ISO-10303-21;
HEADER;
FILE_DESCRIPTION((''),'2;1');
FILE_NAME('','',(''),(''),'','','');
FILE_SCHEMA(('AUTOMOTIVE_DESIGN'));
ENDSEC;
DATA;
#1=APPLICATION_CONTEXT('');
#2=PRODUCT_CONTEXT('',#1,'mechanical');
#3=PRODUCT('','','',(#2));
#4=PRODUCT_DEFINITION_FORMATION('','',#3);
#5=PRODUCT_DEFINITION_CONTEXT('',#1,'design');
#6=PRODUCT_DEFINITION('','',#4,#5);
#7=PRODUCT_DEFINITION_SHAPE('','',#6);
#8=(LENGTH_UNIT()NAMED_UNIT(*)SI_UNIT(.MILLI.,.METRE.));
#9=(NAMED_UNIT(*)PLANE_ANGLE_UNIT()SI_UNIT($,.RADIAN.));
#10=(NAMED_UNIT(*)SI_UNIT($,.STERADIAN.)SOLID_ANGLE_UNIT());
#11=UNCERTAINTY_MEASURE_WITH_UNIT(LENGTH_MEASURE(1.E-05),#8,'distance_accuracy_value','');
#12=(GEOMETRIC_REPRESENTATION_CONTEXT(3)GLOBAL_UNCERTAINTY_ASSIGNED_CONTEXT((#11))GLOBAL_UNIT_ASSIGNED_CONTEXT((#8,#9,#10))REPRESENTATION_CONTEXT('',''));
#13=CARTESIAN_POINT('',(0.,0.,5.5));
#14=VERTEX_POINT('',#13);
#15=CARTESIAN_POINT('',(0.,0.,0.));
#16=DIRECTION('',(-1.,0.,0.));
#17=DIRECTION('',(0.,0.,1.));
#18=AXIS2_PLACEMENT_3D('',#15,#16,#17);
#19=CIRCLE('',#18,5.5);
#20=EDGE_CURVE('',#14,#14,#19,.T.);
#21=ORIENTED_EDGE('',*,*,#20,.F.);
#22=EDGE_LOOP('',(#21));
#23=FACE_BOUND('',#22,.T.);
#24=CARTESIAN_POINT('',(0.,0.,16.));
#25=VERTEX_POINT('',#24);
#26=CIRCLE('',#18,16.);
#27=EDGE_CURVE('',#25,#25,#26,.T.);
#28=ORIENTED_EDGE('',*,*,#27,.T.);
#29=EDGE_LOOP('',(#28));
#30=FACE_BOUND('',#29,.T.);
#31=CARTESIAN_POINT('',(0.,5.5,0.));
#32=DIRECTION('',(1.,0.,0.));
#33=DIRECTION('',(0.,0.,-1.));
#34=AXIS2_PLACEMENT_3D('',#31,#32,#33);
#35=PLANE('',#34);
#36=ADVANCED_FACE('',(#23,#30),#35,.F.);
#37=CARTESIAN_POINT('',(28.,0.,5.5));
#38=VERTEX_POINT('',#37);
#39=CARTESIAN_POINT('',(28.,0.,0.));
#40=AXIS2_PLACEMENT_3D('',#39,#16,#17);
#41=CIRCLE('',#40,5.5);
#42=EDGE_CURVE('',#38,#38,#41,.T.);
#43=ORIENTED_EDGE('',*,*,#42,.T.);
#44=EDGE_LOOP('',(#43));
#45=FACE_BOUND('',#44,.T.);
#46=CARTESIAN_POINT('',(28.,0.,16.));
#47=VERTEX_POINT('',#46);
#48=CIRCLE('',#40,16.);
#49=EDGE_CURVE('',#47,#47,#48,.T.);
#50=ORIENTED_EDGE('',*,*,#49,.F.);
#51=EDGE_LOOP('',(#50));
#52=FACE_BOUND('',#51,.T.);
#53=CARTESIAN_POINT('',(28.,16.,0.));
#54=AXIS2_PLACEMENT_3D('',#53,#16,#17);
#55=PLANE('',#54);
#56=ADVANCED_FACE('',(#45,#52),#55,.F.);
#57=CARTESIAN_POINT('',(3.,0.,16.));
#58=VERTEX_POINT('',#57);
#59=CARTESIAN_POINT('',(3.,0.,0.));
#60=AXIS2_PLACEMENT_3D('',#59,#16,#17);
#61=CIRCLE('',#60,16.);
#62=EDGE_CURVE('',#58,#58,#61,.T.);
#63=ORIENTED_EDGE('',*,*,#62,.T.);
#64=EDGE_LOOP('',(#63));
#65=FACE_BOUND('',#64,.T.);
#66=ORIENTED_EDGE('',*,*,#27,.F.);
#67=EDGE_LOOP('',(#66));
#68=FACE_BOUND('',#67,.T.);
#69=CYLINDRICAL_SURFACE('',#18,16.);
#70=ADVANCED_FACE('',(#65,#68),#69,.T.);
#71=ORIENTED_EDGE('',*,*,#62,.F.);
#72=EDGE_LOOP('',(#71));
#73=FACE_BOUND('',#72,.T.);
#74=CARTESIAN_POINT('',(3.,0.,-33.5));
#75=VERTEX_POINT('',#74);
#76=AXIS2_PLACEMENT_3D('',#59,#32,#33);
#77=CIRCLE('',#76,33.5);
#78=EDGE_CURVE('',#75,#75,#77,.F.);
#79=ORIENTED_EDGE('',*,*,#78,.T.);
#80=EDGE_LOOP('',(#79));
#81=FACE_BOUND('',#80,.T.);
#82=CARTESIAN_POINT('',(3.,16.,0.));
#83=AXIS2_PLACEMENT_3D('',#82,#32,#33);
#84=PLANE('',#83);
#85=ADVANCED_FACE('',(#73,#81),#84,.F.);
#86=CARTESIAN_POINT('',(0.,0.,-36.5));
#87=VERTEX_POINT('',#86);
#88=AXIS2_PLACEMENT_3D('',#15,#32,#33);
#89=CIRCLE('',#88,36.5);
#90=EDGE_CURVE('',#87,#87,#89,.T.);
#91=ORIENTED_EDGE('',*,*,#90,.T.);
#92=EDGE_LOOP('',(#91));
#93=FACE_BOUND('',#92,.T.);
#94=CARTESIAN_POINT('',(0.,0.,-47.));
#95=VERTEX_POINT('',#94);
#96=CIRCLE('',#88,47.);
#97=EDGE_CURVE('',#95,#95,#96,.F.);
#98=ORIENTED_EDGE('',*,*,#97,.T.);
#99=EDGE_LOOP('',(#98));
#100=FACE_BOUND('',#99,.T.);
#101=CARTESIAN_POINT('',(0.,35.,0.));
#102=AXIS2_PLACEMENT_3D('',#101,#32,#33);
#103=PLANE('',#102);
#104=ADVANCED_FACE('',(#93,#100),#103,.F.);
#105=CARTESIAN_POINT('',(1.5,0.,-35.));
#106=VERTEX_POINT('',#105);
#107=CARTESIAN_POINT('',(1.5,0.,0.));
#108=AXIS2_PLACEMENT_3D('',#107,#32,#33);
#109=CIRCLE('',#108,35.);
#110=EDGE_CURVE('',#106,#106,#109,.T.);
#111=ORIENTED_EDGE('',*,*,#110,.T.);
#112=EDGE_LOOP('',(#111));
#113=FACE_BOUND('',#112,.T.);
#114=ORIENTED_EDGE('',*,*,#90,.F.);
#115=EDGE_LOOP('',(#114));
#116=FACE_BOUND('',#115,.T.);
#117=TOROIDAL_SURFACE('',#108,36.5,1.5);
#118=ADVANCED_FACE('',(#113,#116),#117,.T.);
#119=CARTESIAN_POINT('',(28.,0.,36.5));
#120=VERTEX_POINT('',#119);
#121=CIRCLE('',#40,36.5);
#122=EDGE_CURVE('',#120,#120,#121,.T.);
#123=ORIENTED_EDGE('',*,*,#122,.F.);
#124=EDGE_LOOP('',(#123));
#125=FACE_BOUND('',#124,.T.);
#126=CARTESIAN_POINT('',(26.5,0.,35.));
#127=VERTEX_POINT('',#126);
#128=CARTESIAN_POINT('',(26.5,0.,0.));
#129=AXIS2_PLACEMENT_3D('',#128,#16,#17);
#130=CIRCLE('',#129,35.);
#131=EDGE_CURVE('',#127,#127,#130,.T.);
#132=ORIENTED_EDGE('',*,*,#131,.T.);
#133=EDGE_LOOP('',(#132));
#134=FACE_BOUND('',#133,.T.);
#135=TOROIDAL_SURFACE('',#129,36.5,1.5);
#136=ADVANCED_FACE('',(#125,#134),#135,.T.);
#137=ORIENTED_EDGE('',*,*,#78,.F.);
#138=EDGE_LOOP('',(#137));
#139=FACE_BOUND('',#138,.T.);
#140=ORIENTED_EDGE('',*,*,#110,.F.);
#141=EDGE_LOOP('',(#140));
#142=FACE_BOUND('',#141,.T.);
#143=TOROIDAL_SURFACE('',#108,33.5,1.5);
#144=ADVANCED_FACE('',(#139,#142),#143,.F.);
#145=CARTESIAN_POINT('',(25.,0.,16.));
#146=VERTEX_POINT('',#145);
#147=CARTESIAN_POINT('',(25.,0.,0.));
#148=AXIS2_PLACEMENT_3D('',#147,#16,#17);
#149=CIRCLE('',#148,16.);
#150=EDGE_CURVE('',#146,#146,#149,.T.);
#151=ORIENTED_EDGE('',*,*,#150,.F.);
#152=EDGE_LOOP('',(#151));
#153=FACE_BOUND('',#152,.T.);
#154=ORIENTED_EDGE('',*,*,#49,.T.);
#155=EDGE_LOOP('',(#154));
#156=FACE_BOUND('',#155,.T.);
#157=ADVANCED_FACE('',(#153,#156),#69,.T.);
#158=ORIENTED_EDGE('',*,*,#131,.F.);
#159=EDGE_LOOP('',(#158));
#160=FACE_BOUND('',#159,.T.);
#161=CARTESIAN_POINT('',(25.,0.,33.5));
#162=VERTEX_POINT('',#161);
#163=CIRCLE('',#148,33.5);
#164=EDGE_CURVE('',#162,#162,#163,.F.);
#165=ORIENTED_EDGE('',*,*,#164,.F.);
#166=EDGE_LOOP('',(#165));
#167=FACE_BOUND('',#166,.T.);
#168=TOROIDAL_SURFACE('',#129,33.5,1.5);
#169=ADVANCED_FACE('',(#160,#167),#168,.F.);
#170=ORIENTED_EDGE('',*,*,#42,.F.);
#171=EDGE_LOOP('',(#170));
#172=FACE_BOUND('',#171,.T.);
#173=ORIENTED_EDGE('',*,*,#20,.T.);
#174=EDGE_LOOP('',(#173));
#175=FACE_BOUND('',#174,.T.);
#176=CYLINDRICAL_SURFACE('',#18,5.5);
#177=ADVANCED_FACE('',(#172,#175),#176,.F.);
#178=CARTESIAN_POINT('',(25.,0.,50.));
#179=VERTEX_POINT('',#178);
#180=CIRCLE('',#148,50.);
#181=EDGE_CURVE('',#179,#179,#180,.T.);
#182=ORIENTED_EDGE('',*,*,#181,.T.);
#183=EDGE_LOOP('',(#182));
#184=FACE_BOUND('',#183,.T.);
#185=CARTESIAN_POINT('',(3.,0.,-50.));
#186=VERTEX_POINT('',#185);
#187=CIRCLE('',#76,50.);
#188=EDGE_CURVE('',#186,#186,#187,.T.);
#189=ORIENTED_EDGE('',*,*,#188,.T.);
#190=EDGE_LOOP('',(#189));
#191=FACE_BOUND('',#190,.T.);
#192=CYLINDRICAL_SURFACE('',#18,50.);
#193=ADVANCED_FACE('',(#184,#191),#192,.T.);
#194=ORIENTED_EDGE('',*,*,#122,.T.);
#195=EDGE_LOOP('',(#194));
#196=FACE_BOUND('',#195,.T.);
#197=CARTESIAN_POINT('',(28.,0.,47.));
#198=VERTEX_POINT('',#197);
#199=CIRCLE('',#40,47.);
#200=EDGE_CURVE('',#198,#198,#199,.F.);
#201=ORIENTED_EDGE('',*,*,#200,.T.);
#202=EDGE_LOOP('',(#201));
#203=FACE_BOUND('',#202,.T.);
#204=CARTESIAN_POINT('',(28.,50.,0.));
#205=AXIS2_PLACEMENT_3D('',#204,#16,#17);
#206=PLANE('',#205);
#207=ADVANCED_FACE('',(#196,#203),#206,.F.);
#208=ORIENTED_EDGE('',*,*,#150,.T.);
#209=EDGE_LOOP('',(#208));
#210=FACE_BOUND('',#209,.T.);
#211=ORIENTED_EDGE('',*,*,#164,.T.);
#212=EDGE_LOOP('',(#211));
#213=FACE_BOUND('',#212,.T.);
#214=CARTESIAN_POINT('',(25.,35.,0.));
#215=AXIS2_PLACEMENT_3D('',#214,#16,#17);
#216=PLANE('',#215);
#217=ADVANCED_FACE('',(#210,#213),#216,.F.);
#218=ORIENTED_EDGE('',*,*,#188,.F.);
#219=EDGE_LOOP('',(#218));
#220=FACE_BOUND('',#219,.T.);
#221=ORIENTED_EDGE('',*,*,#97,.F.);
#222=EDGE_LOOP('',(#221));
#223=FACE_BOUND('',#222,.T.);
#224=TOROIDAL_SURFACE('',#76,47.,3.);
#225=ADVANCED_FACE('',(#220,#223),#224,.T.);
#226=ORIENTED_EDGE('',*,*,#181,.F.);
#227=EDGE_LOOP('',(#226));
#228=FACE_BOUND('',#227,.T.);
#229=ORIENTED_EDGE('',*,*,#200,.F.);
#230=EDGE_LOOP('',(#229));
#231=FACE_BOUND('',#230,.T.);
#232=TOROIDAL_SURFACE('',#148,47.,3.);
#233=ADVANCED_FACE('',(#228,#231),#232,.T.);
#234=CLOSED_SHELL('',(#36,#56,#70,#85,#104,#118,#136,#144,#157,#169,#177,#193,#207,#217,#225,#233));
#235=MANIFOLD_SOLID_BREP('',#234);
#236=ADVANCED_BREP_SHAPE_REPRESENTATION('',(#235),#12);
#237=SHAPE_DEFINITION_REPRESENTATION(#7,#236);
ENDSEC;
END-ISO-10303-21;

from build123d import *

# Parameters (mm, degrees)
FILLET1_R = 3
FILLET2_R = 1.5


with BuildPart() as part:
    # Sketch1 → Revolve1 (revolve)
    with BuildSketch(Plane.XY, mode=Mode.PRIVATE) as revolve1_sk:
        Polygon((0, 50), (28, 50), (28, 35), (25, 35), (25, 16), (28, 16), (28, 5.5), (0, 5.5), (0, 16), (3, 16), (3, 35), (0, 35), align=None)
    revolve(revolve1_sk.sketch.rotate(Axis((0, 0, 0), (1, 0, 0)), 90), axis=Axis((0, 0, 0), (1, 0, 0)))

    # Fillet1
    fillet1_edges = [part.edges().sort_by_distance(p)[0] for p in [
        (28, 0, -50),
        (0, 0, -50),
    ]]
    fillet(fillet1_edges, radius=FILLET1_R)

    # Fillet2
    fillet2_edges = [part.edges().sort_by_distance(p)[0] for p in [
        (25, 0, -35),
        (28, 0, -35),
        (0, 0, -35),
        (3, 0, -35),
    ]]
    fillet(fillet2_edges, radius=FILLET2_R - 0.0001)  # a hair under: the kernel refuses the full size


solid = part.part
